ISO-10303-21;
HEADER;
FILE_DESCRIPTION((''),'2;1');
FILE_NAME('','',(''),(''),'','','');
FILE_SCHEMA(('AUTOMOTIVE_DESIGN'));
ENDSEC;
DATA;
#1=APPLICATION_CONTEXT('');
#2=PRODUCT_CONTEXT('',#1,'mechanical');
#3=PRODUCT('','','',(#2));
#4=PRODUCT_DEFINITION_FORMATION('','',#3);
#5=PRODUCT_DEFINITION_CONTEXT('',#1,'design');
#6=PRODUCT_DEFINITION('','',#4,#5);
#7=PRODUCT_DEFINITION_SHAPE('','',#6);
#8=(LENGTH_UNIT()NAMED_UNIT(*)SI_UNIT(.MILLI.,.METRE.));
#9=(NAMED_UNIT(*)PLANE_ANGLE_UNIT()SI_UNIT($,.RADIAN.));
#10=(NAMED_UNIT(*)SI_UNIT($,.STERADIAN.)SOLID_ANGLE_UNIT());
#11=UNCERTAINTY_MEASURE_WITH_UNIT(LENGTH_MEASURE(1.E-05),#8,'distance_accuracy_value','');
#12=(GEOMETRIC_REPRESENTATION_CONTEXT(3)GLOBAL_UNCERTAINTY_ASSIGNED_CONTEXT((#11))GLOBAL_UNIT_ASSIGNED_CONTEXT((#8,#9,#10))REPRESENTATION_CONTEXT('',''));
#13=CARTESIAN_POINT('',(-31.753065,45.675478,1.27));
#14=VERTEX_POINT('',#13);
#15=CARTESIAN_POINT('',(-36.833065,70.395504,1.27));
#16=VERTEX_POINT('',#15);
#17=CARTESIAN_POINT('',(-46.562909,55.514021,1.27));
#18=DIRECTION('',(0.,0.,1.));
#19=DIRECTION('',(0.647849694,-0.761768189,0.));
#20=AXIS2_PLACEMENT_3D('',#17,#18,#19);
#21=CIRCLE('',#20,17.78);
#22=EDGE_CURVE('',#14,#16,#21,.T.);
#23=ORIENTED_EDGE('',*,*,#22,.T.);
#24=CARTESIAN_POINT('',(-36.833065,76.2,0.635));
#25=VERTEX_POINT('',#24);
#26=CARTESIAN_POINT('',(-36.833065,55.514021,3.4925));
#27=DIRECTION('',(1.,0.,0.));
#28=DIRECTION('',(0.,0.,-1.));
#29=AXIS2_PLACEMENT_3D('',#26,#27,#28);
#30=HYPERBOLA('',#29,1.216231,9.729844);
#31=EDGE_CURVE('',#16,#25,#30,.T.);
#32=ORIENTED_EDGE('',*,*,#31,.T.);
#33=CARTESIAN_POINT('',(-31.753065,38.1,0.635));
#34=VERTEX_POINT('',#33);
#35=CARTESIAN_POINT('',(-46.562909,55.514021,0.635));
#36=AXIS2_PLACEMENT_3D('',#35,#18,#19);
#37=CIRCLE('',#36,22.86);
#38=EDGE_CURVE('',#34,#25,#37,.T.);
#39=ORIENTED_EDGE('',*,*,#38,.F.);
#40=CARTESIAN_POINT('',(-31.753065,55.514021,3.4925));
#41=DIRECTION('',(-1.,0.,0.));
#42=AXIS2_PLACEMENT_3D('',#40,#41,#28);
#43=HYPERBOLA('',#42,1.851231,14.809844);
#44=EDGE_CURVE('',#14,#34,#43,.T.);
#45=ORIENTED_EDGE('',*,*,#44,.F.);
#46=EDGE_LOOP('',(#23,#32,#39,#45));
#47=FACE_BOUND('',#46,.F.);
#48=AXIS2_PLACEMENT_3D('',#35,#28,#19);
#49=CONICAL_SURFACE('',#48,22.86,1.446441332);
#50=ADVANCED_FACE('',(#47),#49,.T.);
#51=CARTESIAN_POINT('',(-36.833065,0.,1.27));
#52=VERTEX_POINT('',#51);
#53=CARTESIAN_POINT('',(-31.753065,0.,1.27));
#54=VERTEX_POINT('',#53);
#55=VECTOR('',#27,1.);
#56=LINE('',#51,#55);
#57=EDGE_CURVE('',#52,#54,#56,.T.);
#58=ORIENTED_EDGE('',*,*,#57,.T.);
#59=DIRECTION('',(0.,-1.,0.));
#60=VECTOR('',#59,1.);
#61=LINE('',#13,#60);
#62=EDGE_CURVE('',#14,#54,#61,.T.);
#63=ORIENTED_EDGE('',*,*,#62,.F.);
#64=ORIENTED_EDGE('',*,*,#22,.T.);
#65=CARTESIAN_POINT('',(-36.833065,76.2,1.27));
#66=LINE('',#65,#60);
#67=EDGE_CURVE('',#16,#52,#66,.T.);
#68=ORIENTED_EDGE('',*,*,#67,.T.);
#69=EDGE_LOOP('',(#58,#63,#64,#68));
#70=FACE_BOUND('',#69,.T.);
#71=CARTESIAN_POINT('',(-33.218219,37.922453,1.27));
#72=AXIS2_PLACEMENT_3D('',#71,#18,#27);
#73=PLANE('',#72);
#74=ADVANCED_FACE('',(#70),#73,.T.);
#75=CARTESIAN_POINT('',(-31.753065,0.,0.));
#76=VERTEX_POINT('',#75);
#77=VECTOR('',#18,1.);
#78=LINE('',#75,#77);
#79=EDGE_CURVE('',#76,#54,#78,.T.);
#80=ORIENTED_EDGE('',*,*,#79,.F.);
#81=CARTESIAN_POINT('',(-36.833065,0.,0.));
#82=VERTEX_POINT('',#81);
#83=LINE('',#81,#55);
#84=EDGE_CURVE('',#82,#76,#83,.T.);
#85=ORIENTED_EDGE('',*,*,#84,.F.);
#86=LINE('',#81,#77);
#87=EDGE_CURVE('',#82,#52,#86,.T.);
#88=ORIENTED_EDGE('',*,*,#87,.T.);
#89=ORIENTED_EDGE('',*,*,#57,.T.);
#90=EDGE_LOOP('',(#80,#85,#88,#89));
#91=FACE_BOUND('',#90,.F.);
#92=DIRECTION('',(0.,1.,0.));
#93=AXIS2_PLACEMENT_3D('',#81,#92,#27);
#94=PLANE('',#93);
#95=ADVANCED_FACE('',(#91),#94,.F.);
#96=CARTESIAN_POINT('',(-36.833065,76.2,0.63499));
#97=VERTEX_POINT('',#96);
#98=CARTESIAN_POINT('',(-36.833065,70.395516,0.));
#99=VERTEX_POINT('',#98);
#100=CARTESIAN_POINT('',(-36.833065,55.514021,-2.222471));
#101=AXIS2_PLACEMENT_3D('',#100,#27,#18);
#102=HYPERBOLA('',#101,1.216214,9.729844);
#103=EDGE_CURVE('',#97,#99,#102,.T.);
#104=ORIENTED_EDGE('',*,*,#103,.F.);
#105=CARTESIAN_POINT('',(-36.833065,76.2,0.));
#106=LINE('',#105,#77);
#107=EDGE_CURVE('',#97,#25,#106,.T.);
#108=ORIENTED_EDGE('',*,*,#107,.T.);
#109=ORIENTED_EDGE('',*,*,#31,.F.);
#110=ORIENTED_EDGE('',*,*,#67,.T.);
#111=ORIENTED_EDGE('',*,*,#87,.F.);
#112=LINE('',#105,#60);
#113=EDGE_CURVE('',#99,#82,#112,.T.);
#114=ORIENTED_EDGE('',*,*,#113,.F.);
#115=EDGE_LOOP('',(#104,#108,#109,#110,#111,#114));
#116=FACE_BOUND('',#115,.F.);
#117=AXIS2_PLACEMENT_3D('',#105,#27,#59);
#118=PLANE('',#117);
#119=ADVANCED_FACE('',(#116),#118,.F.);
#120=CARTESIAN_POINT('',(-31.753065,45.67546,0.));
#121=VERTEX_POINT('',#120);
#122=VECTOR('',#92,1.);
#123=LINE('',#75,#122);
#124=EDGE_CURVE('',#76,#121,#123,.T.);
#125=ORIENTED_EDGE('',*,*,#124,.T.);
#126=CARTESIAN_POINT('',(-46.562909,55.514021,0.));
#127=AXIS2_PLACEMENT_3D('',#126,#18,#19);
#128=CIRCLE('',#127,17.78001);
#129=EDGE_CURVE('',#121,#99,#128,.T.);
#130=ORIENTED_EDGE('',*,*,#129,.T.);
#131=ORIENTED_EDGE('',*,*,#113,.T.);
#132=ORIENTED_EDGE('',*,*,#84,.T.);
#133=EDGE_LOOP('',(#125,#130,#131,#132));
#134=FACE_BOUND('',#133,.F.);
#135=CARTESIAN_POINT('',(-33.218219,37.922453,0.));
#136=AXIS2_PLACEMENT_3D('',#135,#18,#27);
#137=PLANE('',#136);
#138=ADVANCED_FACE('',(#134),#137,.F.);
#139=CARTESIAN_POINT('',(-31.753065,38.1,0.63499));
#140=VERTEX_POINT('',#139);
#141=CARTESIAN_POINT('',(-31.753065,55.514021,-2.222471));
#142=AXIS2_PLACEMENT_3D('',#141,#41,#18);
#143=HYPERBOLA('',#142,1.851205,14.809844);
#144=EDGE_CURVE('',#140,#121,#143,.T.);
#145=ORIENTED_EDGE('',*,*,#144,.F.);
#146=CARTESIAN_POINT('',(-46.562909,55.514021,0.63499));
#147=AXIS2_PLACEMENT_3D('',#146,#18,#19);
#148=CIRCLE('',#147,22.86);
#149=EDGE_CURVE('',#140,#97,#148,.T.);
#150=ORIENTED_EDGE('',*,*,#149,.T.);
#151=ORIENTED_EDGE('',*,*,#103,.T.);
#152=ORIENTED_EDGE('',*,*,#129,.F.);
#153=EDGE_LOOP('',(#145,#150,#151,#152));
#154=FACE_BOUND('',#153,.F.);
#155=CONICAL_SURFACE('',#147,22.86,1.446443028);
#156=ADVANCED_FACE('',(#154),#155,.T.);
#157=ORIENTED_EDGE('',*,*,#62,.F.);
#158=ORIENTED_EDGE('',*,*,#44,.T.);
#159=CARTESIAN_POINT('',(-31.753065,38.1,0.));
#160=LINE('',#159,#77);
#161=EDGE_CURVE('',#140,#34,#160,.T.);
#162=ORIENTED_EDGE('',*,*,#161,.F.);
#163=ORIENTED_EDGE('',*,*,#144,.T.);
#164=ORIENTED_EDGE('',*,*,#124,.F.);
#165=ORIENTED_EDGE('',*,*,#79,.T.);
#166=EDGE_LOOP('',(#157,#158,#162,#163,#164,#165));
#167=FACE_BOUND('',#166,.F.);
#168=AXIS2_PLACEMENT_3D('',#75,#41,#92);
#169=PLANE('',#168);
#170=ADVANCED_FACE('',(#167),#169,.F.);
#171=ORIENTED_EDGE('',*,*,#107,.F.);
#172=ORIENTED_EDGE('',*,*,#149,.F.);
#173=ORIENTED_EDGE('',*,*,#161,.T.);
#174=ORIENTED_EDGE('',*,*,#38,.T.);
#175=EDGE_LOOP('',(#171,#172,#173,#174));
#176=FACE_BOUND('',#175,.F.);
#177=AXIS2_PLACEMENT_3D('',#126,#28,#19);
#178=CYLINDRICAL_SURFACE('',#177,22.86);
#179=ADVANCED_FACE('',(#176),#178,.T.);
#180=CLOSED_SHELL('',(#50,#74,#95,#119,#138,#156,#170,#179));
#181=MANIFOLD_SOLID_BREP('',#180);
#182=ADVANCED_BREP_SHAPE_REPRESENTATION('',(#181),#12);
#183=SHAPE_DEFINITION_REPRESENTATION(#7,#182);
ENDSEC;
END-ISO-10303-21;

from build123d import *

# Parameters (mm, degrees)
F1_DEPTH = 1.27
F2_SIZE2 = 0.635
F2_SIZE  = 5.08
F3_SIZE2 = 5.07999
F3_SIZE  = 0.63499


# Not quite as in the source:
# - a fillet or chamfer is up to 0.001 mm smaller than in the source, because OpenCascade refuses the exact size


with BuildPart() as f1:
    # F0 (on Top) → F1 (new body)
    with BuildSketch(Plane.XY):
        with BuildLine():
            Line((-36.8330654015, 25.4), (-36.8330654015, 0))
            Line((-36.8330654015, 0), (-31.7530654015, 0))
            Line((-31.7530654015, 0), (-31.7530654015, 25.4))
            Line((-31.7530654015, 25.4), (-31.7530654015, 38.1))
            ThreePointArc((-31.7530654015, 38.1), (-23.9034396028, 58.5352834398), (-36.8330654015, 76.2))
            Line((-36.8330654015, 76.2), (-36.8330654015, 25.4))
        make_face()
    extrude(amount=F1_DEPTH)

    # F2
    f2_edges = [f1.edges().sort_by_distance(p)[0] for p in [
        (-23.90344, 58.535283, 1.27),
    ]]
    f2_side = f1.faces().sort_by_distance((-32.33426, 43.519124, 1.27))[0]
    chamfer(f2_edges, length=F2_SIZE, length2=F2_SIZE2, reference=f2_side)

    # F3 (size 0.635 and 5.08 in the source; OpenCascade refuses exactly that, so slightly less here)
    f3_edges = [f1.edges().sort_by_distance(p)[0] for p in [
        (-23.90344, 58.535283, 0),
    ]]
    f3_side = f1.faces().sort_by_distance((-23.90344, 58.535283, 0.3175))[0]
    chamfer(f3_edges, length=F3_SIZE, length2=F3_SIZE2, reference=f3_side)


solid = f1.part
